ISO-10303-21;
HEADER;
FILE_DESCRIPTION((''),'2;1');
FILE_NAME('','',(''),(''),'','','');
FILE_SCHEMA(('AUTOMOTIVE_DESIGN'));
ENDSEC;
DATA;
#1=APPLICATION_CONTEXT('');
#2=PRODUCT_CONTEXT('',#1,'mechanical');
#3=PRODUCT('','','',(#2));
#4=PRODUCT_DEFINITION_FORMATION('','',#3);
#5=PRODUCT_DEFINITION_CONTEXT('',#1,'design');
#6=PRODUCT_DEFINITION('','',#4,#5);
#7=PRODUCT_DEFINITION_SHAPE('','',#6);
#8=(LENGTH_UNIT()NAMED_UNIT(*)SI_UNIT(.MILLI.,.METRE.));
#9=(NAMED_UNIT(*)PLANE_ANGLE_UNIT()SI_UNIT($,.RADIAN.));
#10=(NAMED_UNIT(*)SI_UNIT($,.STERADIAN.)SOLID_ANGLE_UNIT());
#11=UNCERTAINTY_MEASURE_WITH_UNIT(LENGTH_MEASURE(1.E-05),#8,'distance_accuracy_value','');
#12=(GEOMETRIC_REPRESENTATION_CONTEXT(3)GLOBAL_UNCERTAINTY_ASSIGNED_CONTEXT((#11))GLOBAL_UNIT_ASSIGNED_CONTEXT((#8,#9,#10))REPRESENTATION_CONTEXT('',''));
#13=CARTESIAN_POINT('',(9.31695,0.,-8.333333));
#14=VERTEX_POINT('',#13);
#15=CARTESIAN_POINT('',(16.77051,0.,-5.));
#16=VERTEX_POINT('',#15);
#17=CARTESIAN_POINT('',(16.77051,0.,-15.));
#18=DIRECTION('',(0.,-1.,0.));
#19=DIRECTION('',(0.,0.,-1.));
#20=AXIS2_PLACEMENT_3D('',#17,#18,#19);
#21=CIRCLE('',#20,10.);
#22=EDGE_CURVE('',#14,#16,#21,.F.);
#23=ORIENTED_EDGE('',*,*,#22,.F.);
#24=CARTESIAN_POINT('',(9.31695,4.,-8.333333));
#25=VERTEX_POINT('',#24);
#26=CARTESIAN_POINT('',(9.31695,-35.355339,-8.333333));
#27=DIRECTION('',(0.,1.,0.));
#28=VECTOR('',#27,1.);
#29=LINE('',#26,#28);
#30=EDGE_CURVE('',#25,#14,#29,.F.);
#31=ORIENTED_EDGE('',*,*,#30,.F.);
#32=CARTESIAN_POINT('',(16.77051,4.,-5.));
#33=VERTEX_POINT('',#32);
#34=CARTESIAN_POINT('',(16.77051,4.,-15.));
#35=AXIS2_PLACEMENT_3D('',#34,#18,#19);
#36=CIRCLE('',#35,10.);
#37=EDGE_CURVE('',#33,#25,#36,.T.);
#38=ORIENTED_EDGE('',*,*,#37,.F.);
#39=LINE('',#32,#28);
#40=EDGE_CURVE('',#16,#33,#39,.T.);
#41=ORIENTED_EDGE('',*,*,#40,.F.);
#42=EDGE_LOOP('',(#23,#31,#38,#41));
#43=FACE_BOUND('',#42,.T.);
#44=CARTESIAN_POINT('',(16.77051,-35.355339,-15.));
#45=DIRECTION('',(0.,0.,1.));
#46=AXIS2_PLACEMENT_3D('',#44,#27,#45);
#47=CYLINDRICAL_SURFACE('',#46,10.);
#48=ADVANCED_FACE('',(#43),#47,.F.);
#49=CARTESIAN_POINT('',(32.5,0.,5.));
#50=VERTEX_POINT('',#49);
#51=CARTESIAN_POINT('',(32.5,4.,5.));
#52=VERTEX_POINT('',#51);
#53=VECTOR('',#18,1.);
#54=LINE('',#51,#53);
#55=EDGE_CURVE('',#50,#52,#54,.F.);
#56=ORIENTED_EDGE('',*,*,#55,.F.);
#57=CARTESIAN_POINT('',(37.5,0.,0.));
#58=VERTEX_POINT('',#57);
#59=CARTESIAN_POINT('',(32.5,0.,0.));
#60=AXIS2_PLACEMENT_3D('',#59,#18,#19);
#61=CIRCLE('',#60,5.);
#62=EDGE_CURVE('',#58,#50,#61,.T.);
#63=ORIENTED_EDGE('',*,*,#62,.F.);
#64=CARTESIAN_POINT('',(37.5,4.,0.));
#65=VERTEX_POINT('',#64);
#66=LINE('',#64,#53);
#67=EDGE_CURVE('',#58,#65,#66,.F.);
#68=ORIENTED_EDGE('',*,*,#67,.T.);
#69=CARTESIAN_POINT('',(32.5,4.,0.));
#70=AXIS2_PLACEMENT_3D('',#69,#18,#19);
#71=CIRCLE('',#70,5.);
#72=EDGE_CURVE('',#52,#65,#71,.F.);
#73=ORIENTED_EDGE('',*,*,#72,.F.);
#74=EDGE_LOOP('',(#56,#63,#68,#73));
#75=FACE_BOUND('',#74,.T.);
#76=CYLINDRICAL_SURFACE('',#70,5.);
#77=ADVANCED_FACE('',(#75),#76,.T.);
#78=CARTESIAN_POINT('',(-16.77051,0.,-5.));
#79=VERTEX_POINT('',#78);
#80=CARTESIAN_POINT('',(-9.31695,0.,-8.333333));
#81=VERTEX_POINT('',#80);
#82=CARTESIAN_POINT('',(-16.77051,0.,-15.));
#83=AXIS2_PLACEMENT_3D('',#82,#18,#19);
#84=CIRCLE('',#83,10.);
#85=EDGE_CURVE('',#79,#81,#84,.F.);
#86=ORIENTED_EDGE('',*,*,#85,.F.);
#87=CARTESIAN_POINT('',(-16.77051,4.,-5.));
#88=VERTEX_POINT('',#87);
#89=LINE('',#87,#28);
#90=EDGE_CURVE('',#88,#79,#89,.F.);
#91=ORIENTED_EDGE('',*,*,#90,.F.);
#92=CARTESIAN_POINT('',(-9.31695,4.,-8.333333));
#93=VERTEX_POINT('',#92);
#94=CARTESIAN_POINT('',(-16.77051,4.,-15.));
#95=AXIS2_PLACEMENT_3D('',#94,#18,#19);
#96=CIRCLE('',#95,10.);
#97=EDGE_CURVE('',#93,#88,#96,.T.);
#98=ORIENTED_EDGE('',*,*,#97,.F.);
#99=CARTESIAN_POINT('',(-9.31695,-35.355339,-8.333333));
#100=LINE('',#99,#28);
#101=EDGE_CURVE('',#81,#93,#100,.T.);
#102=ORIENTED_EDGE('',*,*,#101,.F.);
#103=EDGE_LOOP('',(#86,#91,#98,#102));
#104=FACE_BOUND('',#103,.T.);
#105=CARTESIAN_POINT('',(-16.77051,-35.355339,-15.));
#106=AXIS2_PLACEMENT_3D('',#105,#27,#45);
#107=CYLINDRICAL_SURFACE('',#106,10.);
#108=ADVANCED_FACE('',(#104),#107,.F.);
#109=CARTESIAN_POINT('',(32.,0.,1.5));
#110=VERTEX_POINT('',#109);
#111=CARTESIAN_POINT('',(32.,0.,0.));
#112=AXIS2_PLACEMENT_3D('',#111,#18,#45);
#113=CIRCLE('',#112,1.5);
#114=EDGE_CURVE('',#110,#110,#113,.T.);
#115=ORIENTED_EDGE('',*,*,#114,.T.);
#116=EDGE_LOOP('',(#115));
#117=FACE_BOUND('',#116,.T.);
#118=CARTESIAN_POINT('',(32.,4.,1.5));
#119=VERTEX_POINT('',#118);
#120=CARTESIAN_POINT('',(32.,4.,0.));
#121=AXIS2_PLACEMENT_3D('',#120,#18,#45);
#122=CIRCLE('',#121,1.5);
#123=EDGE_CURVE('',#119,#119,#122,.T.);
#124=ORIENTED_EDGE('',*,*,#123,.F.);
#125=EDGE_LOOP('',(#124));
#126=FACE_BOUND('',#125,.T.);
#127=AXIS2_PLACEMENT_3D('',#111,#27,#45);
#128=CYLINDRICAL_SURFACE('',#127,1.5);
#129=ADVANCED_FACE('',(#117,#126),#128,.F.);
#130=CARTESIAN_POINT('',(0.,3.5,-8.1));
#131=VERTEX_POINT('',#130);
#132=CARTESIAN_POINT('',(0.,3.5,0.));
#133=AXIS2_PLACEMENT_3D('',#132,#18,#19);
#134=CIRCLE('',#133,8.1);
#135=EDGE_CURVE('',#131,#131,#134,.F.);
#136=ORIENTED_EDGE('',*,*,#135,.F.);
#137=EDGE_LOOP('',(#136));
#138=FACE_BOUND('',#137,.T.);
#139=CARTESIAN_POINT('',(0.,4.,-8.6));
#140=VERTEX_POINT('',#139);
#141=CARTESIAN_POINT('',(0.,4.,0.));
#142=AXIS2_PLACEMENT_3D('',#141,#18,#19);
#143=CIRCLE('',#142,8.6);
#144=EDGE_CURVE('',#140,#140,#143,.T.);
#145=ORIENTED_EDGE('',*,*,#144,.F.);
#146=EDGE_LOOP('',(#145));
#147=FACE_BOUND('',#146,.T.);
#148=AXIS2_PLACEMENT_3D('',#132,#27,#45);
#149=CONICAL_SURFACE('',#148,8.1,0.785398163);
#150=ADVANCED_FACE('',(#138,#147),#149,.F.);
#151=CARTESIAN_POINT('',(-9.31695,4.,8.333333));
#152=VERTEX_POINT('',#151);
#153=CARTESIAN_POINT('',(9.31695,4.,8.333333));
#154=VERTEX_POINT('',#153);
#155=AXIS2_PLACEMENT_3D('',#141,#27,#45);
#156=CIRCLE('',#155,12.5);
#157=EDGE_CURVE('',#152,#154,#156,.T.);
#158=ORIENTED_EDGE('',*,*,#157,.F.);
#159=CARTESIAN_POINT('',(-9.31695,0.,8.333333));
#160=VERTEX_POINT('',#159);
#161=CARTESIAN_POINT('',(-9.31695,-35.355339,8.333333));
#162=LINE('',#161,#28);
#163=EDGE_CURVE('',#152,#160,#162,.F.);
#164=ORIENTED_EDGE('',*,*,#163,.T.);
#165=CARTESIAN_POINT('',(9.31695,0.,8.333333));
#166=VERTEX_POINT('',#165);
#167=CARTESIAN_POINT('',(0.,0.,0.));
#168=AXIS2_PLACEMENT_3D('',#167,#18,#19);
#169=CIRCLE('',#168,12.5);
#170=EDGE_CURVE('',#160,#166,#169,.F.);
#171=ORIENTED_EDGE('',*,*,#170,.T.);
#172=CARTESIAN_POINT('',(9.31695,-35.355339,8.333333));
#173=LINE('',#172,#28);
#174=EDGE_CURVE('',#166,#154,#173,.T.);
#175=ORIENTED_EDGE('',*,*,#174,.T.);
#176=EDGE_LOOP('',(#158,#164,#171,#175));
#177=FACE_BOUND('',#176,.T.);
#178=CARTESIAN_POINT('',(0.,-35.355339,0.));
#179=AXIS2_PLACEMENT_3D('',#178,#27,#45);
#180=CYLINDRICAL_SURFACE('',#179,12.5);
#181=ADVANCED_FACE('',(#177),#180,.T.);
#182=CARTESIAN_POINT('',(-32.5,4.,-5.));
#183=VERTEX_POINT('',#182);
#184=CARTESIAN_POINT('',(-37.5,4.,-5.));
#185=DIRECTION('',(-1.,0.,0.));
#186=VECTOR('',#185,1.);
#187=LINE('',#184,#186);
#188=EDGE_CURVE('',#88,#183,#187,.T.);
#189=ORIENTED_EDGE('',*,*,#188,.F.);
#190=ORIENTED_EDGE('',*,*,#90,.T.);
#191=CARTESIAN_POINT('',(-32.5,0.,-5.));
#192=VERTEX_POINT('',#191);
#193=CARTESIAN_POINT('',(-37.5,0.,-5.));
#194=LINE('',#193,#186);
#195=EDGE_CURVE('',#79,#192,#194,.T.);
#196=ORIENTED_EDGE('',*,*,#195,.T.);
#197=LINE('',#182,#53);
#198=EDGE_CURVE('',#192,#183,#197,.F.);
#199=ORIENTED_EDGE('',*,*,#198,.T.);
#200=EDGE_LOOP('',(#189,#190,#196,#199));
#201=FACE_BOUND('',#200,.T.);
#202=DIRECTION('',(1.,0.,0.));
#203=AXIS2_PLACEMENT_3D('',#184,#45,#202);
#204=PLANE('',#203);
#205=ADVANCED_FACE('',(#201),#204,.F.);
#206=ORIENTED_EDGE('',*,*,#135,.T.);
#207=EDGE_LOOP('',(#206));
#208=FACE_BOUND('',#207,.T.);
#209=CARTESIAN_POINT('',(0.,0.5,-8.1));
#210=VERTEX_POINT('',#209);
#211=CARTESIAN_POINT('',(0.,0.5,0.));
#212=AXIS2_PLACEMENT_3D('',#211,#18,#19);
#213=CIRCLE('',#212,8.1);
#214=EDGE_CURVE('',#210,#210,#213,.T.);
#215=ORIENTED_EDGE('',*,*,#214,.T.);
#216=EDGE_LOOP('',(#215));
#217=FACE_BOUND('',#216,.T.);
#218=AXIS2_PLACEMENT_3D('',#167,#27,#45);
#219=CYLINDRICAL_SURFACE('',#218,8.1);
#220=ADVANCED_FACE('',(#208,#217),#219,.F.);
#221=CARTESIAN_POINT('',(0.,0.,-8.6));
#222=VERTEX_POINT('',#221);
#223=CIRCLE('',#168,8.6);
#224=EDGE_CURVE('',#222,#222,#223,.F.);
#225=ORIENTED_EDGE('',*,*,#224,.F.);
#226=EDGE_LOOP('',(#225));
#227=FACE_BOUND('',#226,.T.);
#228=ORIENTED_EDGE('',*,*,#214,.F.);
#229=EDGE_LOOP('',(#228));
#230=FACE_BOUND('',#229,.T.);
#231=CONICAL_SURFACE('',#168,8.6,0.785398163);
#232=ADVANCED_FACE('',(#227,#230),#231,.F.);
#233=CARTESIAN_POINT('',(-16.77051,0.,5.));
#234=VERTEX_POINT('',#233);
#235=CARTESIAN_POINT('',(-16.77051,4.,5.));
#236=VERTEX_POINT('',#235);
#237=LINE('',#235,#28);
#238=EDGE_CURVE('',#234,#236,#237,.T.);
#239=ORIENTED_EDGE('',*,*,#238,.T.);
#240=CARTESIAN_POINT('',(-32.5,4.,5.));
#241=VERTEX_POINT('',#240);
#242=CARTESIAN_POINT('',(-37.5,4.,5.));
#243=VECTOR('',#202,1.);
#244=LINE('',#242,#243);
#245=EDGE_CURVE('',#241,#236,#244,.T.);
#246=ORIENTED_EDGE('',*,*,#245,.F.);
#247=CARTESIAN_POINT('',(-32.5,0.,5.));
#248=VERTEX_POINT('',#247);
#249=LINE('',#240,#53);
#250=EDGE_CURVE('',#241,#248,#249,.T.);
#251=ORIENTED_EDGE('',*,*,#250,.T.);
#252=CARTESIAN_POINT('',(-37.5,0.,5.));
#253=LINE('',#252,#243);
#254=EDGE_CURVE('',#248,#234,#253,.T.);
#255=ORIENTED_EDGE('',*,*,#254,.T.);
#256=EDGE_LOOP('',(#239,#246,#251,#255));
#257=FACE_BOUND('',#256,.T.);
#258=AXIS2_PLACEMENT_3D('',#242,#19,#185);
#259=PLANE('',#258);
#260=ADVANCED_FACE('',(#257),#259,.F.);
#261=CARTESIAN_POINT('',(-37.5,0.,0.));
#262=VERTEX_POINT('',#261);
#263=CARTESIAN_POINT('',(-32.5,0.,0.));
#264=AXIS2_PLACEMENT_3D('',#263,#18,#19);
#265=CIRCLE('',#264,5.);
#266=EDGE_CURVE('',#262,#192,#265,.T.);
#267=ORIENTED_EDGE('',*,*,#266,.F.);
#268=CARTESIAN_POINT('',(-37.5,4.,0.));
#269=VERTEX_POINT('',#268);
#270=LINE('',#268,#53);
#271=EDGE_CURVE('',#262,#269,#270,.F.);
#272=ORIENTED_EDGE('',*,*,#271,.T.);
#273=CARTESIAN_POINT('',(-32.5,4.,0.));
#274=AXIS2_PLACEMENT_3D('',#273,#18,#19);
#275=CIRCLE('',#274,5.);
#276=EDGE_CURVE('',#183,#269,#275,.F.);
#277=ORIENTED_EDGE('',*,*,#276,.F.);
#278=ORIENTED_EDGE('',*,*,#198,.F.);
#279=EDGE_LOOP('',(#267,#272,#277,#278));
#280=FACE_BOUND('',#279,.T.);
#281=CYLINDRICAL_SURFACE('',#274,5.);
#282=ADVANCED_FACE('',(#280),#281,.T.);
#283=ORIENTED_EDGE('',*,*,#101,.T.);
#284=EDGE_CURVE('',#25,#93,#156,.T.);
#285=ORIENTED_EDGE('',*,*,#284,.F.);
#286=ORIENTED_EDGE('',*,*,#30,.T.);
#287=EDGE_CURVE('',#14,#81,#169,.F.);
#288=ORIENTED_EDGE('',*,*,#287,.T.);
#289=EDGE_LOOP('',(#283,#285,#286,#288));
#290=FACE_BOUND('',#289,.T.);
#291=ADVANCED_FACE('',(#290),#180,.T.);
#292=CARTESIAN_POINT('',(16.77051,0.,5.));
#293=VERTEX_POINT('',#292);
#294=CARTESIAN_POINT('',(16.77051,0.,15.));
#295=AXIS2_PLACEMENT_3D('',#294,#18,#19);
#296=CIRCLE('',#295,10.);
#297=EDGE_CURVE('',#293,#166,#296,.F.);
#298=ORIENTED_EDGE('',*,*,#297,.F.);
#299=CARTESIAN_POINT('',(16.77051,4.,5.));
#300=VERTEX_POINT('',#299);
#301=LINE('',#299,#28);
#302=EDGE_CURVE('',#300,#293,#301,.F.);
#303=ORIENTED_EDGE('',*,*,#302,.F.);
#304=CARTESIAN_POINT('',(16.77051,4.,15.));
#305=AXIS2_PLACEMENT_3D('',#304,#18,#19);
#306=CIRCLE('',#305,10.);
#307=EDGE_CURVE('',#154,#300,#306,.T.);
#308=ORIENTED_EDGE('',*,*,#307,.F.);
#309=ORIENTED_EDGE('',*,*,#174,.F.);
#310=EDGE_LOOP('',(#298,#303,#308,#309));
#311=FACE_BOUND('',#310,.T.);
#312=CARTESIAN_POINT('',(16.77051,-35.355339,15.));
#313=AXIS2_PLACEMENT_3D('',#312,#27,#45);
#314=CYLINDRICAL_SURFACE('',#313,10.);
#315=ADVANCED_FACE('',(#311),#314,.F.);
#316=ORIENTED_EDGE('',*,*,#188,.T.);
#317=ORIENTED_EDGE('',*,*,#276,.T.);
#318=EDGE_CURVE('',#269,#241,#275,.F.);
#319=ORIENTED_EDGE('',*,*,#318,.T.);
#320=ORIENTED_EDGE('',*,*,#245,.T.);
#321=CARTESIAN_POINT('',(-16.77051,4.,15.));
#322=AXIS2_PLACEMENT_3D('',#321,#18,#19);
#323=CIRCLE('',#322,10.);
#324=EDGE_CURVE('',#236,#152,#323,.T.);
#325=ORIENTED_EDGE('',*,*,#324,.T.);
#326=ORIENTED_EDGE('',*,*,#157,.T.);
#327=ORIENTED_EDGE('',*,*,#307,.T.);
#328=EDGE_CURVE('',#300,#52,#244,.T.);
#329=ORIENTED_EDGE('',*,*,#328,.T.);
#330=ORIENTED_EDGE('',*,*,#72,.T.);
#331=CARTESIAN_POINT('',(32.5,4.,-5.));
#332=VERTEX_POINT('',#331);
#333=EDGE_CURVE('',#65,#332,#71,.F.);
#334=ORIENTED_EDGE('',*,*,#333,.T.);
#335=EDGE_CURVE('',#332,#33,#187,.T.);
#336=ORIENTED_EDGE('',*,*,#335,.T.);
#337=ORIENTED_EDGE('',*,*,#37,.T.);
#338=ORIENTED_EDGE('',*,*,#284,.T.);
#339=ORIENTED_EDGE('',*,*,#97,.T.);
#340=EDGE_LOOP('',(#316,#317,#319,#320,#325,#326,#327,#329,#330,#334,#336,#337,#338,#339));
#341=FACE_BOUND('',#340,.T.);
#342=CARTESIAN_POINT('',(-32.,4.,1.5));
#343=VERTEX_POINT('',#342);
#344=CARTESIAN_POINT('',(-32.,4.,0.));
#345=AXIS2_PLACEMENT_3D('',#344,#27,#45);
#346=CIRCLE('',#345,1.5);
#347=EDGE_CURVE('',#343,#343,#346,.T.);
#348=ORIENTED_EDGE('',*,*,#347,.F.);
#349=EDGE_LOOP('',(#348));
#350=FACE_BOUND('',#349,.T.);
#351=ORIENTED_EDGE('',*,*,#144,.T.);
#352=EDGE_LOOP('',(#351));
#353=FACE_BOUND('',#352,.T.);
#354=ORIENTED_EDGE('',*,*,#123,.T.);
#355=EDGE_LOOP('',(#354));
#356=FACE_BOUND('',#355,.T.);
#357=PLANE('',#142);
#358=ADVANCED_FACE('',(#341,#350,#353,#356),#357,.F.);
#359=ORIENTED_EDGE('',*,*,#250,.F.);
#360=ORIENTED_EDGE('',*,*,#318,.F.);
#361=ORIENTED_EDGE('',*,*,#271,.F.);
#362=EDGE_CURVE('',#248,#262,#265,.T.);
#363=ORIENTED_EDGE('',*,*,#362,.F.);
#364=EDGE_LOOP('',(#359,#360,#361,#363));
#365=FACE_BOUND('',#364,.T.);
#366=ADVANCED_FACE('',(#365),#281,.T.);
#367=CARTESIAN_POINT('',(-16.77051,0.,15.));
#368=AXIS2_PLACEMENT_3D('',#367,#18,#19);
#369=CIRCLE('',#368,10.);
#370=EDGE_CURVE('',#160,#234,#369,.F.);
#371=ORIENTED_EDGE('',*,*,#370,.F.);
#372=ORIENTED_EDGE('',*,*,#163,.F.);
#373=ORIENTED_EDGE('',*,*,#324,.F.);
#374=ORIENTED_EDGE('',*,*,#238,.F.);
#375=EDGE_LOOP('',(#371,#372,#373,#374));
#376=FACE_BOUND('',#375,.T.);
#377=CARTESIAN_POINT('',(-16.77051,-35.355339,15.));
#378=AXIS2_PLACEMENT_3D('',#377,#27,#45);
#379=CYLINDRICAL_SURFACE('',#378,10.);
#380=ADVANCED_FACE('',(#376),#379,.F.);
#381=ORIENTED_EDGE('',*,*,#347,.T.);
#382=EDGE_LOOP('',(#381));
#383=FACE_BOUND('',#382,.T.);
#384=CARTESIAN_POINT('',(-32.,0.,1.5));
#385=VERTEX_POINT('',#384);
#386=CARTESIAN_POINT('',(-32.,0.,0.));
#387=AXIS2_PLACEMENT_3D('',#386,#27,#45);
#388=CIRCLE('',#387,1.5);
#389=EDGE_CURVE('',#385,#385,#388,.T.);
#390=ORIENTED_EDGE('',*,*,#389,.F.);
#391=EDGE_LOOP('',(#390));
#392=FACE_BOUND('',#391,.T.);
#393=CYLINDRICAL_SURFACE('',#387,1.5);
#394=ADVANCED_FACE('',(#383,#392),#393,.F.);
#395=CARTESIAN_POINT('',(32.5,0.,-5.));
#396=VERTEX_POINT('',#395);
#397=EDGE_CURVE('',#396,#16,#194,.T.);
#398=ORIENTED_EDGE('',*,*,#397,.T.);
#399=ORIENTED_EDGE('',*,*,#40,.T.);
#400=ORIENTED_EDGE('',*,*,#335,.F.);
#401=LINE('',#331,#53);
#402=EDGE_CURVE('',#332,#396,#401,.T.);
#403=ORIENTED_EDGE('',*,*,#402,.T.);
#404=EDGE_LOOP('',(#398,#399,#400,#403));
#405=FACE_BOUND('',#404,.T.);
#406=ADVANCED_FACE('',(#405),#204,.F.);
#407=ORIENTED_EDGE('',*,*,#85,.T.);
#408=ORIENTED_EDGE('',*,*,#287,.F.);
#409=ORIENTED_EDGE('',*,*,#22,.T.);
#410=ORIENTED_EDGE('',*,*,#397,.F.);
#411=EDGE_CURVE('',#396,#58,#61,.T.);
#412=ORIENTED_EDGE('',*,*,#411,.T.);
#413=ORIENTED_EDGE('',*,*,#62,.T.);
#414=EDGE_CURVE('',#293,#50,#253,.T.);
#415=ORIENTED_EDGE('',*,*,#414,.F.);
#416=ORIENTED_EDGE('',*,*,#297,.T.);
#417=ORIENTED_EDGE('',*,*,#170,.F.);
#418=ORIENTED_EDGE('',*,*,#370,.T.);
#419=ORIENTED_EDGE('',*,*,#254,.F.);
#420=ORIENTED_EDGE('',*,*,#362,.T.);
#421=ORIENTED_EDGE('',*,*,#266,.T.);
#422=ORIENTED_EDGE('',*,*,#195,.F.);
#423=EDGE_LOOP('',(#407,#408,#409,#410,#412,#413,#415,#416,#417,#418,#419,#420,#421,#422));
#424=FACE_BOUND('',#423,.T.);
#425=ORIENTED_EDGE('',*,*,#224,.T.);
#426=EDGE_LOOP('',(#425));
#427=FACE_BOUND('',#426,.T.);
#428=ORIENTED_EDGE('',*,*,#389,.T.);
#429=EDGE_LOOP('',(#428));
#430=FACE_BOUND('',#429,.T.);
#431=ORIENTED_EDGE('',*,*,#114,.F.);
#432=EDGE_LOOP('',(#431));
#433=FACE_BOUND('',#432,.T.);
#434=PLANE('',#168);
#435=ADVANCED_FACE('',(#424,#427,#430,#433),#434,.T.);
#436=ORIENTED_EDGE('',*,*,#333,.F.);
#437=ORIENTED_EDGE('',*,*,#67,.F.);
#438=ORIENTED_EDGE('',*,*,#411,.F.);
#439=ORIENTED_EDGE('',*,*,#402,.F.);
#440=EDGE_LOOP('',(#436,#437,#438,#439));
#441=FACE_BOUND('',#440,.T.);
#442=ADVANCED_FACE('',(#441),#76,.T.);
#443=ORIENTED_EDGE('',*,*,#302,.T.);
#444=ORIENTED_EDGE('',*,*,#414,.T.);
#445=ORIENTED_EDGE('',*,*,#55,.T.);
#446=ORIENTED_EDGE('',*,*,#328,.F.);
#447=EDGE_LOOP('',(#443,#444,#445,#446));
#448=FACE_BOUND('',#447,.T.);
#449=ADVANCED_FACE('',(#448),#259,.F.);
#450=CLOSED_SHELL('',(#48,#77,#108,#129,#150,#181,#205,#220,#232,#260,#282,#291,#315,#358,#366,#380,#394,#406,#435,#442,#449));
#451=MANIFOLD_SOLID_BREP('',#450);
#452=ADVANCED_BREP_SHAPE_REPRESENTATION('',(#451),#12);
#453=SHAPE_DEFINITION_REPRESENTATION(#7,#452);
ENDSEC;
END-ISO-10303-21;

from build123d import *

# Parameters (mm, degrees)
SKETCH1_W           = 75
SKETCH1_H           = 10
BOSS_EXTRUDE1_DEPTH = 4
SKETCH7_R           = 12.5
BOSS_EXTRUDE2_DEPTH = 4
SKETCH4_R           = 8.1
CUT_EXTRUDE3_DEPTH  = 40.730341051
FILLET2_R           = 10
SKETCH8_R           = 1.5
CUT_EXTRUDE4_DEPTH  = 40.730341051
FILLET3_R           = 5
CHAMFER1_SIZE       = 0.5


with BuildPart() as part:
    # Sketch1 → Boss-Extrude1 (new body)
    with BuildSketch(Plane(origin=(0, 0, 0), x_dir=(1, 0, 0), z_dir=(0, 1, 0))):
        Rectangle(SKETCH1_W, SKETCH1_H)
    extrude(amount=BOSS_EXTRUDE1_DEPTH)

    # Sketch7 → Boss-Extrude2 (add)
    with BuildSketch(Plane(origin=(0, 4, 0), x_dir=(1, 0, 0), z_dir=(0, 1, 0))):
        Circle(SKETCH7_R)
    extrude(amount=-BOSS_EXTRUDE2_DEPTH)

    # Sketch4 → Cut-Extrude3 (cut, through all)
    with BuildSketch(Plane(origin=(0, 4, 0), x_dir=(1, 0, 0), z_dir=(0, 1, 0))):
        with Locations(Location((0, 0, 0), (0, 0, 270))):
            Circle(SKETCH4_R)
    extrude(amount=-CUT_EXTRUDE3_DEPTH, mode=Mode.SUBTRACT)

    # Fillet2
    fillet2_edges = [part.edges().sort_by_distance(p)[0] for p in [
        (11.456439237, 2, -5),
        (11.456439237, 2, 5),
        (-11.456439237, 2, -5),
        (-11.456439237, 2, 5),
    ]]
    fillet(fillet2_edges, radius=FILLET2_R)

    # Sketch8 → Cut-Extrude4 (cut, through all)
    with BuildSketch(Plane(origin=(0, 4, 0), x_dir=(1, 0, 0), z_dir=(0, 1, 0))):
        with Locations(Location((-32, 0, 0), (0, 0, 270))):
            Circle(SKETCH8_R)
    cut_extrude4 = extrude(amount=-CUT_EXTRUDE4_DEPTH, mode=Mode.SUBTRACT)

    # Mirror2: Cut-Extrude4 across plane
    add(cut_extrude4.mirror(Plane(origin=(0, 0, 0), x_dir=(0, 0, 1), z_dir=(1, 0, 0))), mode=Mode.SUBTRACT)

    # Fillet3
    fillet3_edges = [part.edges().sort_by_distance(p)[0] for p in [
        (-37.5, 2, -5),
        (-37.5, 2, 5),
        (37.5, 2, 5),
        (37.5, 2, -5),
    ]]
    fillet(fillet3_edges, radius=FILLET3_R - 0.0001)  # a hair under: the kernel refuses the full size

    # Chamfer1
    chamfer1_edges = [part.edges().sort_by_distance(p)[0] for p in [
        (0, 0, -8.1),
        (0, 4, -8.1),
    ]]
    chamfer(chamfer1_edges, length=CHAMFER1_SIZE)


solid = part.part
